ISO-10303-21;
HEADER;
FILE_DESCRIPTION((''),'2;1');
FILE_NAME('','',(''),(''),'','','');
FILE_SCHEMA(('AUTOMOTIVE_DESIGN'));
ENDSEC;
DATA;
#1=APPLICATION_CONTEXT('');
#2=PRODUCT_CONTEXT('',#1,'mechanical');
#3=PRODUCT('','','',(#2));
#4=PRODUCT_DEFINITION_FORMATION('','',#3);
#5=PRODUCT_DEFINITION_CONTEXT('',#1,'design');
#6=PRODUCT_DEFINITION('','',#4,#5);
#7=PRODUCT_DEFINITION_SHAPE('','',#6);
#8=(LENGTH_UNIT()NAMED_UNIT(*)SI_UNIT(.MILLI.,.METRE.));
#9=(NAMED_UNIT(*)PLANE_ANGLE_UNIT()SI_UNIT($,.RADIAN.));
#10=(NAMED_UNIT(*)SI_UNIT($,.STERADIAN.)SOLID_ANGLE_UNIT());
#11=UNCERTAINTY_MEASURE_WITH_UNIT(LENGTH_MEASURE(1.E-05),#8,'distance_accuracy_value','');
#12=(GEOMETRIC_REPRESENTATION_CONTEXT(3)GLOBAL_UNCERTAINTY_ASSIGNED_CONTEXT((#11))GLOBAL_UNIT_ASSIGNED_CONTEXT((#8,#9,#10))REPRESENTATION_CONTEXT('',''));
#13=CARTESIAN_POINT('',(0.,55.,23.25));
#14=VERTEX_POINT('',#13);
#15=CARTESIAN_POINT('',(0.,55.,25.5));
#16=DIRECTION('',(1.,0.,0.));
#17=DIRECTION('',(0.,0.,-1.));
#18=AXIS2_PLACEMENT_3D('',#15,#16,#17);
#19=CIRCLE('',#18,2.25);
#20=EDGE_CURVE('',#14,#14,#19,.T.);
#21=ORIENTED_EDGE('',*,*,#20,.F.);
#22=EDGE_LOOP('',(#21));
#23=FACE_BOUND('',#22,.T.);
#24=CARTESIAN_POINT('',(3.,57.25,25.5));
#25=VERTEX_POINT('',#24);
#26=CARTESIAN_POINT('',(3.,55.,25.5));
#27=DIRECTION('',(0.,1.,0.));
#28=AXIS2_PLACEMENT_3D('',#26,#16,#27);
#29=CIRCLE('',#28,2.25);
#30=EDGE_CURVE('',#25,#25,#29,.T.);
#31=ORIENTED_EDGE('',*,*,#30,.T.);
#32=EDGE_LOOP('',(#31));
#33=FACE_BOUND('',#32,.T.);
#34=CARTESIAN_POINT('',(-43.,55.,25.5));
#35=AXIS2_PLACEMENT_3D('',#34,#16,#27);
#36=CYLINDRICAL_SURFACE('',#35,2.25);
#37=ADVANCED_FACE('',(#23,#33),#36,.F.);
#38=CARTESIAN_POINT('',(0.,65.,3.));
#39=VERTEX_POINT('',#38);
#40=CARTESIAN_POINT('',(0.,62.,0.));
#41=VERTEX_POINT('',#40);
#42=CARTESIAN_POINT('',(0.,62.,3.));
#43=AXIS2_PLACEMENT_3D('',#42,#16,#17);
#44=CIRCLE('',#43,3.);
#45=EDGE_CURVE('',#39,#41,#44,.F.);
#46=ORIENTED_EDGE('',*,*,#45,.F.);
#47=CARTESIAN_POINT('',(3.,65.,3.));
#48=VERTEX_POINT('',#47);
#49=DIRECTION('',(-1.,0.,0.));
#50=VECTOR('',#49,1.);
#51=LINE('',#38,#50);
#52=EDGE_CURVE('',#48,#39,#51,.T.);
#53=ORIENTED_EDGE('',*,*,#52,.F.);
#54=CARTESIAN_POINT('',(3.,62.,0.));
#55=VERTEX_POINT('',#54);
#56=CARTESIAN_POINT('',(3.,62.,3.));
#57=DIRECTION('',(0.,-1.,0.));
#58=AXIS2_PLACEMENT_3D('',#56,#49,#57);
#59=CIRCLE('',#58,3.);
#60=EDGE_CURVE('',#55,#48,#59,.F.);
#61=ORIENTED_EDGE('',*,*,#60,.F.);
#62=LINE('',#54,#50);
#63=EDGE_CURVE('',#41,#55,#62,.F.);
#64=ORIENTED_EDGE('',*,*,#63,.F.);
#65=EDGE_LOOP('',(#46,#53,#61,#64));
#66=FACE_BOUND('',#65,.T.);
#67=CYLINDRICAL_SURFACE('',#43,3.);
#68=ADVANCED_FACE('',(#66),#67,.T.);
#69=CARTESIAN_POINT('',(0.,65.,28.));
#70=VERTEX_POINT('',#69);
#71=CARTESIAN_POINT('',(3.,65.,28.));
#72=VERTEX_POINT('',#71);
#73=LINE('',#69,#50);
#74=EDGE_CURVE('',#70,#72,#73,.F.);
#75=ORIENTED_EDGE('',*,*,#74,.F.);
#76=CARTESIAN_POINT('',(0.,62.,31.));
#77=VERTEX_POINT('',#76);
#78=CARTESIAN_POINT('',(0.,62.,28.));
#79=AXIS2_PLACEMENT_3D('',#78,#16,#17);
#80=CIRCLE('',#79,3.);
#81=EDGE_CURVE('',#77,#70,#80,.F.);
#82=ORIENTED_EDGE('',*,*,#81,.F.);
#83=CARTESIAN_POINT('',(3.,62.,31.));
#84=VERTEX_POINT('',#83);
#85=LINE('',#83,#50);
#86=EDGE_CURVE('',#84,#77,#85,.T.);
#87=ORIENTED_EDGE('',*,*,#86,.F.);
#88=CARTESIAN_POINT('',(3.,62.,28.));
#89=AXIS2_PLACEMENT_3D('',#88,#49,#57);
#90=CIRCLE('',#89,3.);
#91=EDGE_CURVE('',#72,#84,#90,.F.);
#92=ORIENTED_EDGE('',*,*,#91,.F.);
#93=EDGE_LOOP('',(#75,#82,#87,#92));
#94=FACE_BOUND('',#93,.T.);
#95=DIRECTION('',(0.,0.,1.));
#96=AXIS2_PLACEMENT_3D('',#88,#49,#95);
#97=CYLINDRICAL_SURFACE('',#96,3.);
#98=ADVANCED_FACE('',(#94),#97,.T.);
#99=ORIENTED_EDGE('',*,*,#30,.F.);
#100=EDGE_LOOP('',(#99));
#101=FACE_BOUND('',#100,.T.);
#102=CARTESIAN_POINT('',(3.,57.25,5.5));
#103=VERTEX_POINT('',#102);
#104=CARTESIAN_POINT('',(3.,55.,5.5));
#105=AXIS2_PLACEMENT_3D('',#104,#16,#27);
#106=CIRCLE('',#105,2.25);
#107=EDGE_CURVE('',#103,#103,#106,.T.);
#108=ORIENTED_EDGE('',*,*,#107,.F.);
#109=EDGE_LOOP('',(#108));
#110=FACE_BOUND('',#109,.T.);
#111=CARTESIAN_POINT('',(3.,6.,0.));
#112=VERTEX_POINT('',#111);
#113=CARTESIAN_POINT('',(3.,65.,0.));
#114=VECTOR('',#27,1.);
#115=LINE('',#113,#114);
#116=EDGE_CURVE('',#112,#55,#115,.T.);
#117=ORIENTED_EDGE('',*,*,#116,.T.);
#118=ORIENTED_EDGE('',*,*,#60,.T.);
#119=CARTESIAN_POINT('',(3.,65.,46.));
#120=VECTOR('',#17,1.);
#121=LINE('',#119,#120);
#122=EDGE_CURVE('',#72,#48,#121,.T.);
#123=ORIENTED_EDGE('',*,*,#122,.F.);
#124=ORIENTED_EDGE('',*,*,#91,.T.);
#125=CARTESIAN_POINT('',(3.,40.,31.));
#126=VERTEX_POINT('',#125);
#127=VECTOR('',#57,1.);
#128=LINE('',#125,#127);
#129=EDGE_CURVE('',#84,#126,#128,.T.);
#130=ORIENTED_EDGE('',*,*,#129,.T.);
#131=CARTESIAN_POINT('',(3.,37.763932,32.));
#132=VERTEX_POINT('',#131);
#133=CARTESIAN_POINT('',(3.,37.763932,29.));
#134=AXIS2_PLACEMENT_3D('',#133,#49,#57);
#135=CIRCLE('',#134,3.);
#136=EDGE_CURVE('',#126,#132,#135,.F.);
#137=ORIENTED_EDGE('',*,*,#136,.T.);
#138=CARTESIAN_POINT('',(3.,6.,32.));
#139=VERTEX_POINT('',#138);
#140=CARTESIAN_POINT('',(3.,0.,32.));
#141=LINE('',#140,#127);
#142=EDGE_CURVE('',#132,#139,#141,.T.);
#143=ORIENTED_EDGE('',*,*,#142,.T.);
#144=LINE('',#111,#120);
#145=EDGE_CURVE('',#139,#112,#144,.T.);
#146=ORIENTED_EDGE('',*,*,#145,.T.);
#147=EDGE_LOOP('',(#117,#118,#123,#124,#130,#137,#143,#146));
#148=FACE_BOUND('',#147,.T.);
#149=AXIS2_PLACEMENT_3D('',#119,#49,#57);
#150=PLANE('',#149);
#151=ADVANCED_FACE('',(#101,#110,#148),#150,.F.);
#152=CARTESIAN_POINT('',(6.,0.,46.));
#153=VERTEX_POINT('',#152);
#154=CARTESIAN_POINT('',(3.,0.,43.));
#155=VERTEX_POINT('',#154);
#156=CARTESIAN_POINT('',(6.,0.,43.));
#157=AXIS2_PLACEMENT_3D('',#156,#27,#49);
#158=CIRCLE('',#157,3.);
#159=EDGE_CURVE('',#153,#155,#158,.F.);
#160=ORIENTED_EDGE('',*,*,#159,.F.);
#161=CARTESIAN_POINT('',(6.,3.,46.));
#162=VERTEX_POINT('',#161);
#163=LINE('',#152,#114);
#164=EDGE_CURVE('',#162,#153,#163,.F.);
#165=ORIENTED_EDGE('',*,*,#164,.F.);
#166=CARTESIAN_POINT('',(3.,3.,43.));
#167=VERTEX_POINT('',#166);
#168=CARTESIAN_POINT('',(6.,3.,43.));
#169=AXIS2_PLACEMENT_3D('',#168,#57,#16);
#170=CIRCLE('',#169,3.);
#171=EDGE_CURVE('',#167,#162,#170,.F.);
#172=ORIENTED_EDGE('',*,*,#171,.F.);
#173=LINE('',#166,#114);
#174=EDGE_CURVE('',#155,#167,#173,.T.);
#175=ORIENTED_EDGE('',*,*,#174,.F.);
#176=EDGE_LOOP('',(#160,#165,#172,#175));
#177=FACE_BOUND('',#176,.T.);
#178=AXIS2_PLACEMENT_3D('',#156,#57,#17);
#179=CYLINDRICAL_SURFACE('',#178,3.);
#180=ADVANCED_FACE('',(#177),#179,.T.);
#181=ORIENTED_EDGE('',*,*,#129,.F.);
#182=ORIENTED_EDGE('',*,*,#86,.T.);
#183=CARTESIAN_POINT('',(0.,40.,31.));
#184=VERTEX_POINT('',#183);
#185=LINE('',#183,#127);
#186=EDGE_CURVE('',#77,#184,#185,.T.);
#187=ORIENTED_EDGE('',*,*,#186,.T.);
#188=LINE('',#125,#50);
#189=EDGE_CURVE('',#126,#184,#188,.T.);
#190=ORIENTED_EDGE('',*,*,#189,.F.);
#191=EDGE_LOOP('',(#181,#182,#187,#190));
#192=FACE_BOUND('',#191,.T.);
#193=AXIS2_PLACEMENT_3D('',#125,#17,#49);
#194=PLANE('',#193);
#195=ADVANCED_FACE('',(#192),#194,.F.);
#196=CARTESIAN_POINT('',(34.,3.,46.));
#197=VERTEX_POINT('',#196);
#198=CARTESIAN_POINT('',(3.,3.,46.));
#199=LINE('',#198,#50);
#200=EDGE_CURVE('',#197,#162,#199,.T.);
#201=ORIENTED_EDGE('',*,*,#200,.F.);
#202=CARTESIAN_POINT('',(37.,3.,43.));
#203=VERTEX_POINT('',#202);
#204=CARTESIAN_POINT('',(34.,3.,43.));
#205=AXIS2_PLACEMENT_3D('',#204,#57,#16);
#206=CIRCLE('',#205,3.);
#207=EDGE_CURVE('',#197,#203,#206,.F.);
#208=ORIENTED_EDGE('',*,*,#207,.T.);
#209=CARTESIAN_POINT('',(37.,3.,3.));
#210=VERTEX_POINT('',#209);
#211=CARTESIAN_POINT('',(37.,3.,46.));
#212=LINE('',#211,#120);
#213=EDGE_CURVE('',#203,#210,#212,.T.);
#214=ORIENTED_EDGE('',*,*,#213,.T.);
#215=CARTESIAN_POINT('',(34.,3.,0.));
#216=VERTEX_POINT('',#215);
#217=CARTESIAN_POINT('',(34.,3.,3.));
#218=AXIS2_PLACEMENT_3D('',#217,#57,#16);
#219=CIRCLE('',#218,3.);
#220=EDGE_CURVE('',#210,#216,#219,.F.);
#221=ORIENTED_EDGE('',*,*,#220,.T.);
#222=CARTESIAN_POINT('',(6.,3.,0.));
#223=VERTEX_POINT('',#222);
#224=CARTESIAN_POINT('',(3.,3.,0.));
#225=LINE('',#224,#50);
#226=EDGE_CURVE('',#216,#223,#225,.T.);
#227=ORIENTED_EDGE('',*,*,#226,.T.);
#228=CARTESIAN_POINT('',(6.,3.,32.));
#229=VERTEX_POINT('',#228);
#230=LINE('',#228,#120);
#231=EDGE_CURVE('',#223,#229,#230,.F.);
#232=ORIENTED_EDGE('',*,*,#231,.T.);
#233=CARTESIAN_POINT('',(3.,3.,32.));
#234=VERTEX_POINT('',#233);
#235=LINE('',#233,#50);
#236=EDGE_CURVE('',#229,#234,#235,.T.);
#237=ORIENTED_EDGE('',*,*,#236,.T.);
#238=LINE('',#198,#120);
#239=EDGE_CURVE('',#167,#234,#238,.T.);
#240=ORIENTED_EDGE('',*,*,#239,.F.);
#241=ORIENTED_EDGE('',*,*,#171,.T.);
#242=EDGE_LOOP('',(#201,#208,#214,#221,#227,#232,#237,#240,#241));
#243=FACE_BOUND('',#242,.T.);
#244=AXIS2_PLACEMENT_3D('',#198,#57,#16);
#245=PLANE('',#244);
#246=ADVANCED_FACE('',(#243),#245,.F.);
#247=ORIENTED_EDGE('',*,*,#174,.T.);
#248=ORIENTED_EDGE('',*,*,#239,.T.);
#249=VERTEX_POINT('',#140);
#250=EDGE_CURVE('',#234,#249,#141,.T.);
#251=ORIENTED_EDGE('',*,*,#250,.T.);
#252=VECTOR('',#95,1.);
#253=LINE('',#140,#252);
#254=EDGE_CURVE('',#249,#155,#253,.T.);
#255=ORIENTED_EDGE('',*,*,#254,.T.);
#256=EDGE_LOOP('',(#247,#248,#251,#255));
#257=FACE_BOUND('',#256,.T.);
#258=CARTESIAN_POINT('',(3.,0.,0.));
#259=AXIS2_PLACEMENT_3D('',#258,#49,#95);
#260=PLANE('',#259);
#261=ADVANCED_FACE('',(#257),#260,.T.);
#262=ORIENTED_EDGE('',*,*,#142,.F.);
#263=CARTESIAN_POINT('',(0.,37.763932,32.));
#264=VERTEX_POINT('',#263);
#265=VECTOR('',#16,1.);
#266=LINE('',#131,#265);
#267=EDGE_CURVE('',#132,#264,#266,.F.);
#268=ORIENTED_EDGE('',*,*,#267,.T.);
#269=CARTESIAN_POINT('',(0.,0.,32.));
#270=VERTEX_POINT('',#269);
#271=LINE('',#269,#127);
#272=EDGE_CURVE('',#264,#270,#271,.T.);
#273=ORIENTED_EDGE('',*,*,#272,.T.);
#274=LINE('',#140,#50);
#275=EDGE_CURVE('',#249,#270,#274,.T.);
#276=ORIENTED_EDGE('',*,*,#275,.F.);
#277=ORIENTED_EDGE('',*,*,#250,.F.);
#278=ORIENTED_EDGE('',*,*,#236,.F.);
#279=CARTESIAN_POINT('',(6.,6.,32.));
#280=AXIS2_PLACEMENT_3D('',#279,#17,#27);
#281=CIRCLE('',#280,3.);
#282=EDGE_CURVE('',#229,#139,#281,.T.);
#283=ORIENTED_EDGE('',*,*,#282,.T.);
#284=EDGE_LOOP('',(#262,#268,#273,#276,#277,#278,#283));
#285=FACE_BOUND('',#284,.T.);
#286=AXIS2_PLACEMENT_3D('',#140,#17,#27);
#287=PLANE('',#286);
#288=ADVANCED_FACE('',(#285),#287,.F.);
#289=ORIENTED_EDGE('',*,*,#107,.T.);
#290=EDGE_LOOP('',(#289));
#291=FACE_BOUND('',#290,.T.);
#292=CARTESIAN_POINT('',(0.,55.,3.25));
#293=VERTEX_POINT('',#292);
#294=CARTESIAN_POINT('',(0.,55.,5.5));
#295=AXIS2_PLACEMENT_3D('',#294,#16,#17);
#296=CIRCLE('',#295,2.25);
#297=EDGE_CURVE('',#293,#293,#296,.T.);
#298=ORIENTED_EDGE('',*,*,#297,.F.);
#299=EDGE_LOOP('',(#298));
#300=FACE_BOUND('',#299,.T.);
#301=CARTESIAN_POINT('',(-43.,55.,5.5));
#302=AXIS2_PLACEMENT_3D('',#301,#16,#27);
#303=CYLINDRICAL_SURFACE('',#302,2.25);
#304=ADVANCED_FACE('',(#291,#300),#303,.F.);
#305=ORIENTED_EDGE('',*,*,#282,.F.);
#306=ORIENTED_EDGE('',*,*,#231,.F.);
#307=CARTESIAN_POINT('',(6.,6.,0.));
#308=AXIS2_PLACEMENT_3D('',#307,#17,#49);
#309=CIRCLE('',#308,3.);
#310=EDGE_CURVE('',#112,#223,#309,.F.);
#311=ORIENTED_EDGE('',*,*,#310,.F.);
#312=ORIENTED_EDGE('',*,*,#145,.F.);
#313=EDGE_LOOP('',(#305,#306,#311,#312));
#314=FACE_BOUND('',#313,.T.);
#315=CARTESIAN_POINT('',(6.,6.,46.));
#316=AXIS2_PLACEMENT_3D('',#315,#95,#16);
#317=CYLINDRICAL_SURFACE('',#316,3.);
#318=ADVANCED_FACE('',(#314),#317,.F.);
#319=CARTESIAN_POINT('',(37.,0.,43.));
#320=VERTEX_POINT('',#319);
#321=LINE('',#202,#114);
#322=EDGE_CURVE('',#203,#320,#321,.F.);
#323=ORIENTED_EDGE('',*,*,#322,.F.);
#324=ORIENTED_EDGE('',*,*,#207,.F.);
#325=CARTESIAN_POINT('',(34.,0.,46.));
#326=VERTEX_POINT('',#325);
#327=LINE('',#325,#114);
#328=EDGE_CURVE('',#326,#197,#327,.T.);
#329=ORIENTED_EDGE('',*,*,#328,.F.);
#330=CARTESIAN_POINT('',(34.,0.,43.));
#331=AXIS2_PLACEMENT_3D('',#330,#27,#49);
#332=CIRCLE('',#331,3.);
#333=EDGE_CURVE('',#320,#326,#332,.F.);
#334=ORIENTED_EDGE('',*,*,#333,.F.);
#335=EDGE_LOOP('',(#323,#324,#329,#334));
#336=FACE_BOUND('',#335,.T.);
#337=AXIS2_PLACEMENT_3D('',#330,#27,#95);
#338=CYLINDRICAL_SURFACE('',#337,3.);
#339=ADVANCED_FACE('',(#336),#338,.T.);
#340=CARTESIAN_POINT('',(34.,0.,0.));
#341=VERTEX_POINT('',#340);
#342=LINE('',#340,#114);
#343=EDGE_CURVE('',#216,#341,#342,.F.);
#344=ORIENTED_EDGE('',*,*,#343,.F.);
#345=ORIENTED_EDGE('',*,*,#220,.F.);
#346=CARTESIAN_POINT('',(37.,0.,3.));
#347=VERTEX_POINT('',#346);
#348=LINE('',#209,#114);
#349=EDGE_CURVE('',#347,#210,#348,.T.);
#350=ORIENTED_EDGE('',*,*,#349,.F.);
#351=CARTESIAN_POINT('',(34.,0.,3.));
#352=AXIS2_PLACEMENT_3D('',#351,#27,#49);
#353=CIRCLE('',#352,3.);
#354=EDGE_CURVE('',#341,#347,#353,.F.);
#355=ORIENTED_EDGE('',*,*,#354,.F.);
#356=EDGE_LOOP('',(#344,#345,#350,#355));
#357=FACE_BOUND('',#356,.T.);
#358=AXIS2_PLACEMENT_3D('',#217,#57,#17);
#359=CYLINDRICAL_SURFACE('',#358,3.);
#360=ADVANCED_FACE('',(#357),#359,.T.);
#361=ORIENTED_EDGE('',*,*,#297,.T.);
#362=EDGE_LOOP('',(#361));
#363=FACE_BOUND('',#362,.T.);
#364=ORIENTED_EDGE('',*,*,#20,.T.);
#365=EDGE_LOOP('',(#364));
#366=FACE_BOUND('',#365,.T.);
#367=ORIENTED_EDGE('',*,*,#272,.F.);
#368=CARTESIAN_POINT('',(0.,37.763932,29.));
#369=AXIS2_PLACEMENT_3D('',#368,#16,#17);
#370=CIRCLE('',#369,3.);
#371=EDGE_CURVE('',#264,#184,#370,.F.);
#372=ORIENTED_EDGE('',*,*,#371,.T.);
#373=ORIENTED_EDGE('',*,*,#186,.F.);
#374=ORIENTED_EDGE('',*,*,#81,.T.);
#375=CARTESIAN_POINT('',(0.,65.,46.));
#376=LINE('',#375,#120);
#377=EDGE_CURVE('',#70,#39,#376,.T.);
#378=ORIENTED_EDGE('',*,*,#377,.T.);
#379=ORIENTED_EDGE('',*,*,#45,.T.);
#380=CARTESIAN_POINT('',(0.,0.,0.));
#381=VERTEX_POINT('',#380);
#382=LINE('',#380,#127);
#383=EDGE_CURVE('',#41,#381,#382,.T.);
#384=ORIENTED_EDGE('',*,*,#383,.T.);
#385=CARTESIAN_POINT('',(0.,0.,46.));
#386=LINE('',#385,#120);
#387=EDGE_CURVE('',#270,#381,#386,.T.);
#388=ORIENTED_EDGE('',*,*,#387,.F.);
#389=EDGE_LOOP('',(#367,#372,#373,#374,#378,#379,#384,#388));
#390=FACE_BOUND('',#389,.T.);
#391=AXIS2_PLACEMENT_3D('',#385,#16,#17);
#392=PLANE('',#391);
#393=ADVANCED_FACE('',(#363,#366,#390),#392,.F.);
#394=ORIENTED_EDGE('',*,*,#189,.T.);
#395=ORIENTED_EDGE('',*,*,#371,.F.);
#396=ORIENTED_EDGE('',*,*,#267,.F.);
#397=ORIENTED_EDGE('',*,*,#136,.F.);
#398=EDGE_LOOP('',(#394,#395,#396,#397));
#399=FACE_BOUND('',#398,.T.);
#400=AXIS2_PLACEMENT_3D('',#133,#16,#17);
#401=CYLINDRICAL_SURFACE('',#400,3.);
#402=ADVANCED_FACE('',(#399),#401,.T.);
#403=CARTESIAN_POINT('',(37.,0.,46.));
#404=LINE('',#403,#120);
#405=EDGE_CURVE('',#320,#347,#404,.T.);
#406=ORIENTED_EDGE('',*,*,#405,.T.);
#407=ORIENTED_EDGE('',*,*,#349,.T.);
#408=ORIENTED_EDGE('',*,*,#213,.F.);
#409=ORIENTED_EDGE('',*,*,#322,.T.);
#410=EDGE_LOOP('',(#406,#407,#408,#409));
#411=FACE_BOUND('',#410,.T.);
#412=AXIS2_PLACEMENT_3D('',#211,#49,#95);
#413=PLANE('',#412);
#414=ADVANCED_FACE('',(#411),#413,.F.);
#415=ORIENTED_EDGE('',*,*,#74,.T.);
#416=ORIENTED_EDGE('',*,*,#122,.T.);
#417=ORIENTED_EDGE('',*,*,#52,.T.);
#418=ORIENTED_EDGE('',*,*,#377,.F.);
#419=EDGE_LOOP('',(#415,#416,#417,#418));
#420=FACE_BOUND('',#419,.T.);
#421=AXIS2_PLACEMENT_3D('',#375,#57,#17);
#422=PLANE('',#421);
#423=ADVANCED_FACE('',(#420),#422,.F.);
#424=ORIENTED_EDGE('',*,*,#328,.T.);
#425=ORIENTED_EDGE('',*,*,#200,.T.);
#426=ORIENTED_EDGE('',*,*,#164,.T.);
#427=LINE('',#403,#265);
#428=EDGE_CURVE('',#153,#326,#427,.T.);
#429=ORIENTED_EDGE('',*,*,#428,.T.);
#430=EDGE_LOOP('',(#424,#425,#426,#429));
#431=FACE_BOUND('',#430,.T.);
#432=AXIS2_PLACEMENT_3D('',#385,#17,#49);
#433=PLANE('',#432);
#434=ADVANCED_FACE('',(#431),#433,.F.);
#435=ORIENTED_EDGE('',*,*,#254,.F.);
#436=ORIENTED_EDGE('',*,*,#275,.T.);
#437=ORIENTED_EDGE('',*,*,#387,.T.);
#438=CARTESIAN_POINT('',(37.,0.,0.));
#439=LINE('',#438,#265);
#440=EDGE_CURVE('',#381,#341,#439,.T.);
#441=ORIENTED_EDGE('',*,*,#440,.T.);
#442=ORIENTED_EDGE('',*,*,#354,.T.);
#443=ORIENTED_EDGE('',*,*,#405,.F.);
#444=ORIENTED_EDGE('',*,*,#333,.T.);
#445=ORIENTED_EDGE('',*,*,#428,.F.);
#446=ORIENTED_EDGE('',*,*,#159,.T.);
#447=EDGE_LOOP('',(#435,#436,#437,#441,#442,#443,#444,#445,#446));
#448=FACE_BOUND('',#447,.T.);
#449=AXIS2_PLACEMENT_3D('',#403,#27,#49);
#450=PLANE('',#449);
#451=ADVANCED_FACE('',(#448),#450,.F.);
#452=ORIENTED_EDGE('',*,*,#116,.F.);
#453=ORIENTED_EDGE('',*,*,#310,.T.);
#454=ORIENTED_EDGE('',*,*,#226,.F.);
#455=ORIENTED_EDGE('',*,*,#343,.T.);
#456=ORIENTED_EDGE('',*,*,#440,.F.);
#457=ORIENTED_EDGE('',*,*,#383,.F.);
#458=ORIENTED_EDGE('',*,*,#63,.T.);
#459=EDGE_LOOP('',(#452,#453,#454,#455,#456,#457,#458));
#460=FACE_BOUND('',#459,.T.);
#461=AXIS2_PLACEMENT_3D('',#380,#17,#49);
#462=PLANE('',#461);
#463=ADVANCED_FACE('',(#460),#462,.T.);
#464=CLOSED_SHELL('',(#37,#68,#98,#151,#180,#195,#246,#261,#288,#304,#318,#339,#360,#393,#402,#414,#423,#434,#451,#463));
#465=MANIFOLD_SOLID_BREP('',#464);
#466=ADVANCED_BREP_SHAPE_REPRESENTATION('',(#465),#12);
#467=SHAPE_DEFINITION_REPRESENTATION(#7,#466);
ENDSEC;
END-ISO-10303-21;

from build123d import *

# Parameters (mm, degrees)
BOSS_EXTRUDE1_DEPTH = 46
CUT_EXTRUDE1_DEPTH  = 3
SKETCH3_R           = 2.25
CUT_EXTRUDE2_DEPTH  = 46
FILLET1_R           = 3


with BuildPart() as part:
    # Sketch1 → Boss-Extrude1 (new body)
    with BuildSketch(Plane.XY):
        Polygon((0, 0), (0, 65), (3, 65), (3, 3), (37, 3), (37, 0), align=None)
    extrude(amount=BOSS_EXTRUDE1_DEPTH)

    # Sketch2 → Cut-Extrude1 (cut)
    with BuildSketch(Plane.ZY):
        Polygon((32, 65), (46, 65), (46, 0), (32, 0), (32, 40), (31, 40), (31, 65), align=None)
    extrude(amount=-CUT_EXTRUDE1_DEPTH, mode=Mode.SUBTRACT)

    # Sketch3 → Cut-Extrude2 (cut)
    with BuildSketch(Plane(origin=(3, 0, 0), x_dir=(0, 0, -1), z_dir=(1, 0, 0))):
        with Locations(Location((-25.5, 55, 0), (0, 0, 90))):
            Circle(SKETCH3_R)
        with Locations(Location((-5.5, 55, 0), (0, 0, 90))):
            Circle(SKETCH3_R)
    extrude(amount=-CUT_EXTRUDE2_DEPTH, mode=Mode.SUBTRACT)

    # Fillet1
    # the kernel refuses this fillet: 3 mm, written as the material it adds along each edge
    with BuildSketch(Plane(origin=(3, 3, 0), x_dir=(0, 1, 0), z_dir=(0, 0, 1))) as fillet1_piece_1:
        with BuildLine():
            CenterArc((FILLET1_R, -FILLET1_R), FILLET1_R, 90, 90)
            Line((0, -FILLET1_R), (0, 0))
            Line((0, 0), (FILLET1_R, 0))
        make_face()
    extrude(amount=32)
    # the kernel refuses this fillet: 3 mm, written as the material it takes off along each edge
    with BuildSketch(Plane(origin=(37, 10.5, 46), x_dir=(0, 0, -1), z_dir=(0, -1, 0)), Plane(origin=(37, 10.5, 0), x_dir=(-1, 0, 0), z_dir=(0, -1, 0)), Plane(origin=(-7.5, 65, 0), x_dir=(0, -1, 0), z_dir=(1, 0, 0)), Plane(origin=(-7.5, 65, 31), x_dir=(0, 0, -1), z_dir=(1, 0, 0))) as fillet1_2_piece_1:
        with BuildLine():
            CenterArc((FILLET1_R, -FILLET1_R), FILLET1_R, 90, 90)
            Line((0, -FILLET1_R), (0, 0))
            Line((0, 0), (FILLET1_R, 0))
        make_face()
    extrude(amount=18, mode=Mode.SUBTRACT)
    with BuildSketch(Plane(origin=(3, 10.5, 46), x_dir=(0, 0, -1), z_dir=(0, -1, 0))) as fillet1_2_piece_2:
        with BuildLine():
            CenterArc((FILLET1_R, FILLET1_R), FILLET1_R, 180, 90)
            Line((0, FILLET1_R), (0, 0))
            Line((0, 0), (FILLET1_R, 0))
        make_face()
    extrude(amount=18, mode=Mode.SUBTRACT)
    with BuildSketch(Plane(origin=(-5.590169944, 40, 32), x_dir=(0, -1, 0), z_dir=(1, 0, 0))) as fillet1_2_piece_3:
        with BuildLine():
            CenterArc((2.236067977, 3), FILLET1_R, 221.810314896, 48.189685104)
            Line((0, 1), (0, 0))
            Line((0, 0), (2.236067977, 0))
        make_face()
    extrude(amount=14.180339887, mode=Mode.SUBTRACT)


solid = part.part
